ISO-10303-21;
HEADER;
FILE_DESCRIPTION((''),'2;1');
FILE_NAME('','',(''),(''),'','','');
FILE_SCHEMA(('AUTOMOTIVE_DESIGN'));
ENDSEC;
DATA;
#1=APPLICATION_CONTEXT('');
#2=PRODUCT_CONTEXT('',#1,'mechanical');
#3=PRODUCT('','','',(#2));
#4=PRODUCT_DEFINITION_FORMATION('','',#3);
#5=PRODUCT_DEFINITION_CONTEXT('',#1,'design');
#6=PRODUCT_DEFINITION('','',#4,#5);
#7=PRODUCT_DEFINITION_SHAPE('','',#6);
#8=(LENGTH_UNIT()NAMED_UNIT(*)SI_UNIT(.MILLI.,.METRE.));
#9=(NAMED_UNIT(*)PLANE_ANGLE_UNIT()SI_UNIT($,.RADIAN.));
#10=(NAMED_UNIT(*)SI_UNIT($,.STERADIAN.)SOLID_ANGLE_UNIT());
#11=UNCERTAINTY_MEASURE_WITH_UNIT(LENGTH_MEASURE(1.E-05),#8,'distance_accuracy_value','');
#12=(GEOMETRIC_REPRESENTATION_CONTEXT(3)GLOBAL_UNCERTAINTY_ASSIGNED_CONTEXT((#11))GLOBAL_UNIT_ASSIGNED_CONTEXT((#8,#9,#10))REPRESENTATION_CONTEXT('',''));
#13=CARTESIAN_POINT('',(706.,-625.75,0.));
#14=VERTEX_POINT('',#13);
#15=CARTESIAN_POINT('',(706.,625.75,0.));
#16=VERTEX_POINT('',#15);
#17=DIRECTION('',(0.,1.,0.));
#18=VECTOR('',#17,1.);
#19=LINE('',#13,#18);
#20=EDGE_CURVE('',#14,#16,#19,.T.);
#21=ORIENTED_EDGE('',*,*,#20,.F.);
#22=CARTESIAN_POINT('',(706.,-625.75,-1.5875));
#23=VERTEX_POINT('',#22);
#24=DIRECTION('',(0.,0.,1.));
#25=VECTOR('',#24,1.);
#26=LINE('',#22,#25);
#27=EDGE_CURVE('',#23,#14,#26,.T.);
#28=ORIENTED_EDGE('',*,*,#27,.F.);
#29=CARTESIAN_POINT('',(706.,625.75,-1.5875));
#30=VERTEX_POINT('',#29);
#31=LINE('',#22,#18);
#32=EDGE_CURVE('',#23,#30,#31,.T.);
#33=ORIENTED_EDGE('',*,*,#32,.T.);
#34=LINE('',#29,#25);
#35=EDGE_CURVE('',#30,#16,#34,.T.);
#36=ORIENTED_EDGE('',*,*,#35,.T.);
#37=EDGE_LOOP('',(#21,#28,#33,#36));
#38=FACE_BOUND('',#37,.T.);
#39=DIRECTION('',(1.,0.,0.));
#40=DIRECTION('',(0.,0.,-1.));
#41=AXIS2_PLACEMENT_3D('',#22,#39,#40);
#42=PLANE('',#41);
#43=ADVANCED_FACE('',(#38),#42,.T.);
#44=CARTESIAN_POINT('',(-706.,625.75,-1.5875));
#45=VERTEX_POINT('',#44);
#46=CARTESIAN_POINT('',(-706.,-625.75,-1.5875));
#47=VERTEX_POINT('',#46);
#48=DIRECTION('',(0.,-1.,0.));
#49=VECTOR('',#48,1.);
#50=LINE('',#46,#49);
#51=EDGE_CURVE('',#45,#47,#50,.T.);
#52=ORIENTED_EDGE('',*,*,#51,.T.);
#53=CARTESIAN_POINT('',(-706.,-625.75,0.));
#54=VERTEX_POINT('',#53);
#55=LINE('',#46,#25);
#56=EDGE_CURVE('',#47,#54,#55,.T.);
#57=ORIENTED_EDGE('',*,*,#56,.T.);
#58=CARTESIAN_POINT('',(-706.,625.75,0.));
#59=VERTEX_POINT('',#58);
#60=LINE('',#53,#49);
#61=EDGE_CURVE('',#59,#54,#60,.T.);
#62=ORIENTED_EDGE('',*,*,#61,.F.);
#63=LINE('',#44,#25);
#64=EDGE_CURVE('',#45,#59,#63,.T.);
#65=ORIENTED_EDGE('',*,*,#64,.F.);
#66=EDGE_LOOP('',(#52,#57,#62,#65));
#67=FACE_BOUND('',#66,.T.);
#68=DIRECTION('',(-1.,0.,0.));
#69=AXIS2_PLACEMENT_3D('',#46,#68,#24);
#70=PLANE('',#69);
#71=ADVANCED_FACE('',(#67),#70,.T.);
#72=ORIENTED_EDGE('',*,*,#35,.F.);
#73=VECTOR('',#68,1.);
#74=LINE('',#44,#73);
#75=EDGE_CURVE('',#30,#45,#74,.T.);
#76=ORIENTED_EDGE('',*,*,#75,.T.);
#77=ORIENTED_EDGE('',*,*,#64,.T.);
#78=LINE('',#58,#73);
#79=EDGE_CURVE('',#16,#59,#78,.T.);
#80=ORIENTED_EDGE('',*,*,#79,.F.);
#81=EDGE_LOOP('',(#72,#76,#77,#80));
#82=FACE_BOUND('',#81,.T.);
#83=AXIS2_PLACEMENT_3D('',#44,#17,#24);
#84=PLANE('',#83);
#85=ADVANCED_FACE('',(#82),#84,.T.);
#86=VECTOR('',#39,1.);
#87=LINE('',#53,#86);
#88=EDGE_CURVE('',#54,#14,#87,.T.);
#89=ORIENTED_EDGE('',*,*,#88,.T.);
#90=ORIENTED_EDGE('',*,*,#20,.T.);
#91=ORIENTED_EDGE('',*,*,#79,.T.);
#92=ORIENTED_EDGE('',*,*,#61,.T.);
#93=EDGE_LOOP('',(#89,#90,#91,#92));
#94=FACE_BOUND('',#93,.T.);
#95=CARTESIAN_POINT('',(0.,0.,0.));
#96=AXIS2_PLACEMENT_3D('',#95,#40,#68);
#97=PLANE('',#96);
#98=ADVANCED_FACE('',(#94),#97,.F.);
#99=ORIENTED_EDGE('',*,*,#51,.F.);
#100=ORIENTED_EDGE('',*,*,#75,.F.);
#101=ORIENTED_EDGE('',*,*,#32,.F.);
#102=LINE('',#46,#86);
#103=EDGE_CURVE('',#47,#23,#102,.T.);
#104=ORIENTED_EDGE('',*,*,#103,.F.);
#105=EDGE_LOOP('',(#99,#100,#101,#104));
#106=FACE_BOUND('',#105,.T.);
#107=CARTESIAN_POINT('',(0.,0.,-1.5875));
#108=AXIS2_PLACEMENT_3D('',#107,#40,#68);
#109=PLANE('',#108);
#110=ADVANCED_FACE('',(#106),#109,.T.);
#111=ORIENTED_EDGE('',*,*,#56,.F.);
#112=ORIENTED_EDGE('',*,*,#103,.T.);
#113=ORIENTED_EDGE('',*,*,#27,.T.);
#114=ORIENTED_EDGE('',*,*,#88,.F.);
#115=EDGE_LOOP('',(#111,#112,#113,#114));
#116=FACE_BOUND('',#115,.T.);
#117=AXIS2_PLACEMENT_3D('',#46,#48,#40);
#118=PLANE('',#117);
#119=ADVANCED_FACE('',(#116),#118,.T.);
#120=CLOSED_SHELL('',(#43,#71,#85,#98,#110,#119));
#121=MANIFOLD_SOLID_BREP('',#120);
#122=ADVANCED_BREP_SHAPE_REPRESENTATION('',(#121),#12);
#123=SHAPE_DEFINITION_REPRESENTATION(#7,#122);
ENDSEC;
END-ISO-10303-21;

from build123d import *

# Parameters (mm, degrees)
CROQUIS1_W        = 1412
CROQUIS1_H        = 1251.5
BRIDA_BASE1_DEPTH = 1.5875


# Sheet-metal steps are written as plain solids
with BuildPart() as part:
    # Croquis1 → Brida base1 (new body)
    with BuildSketch(Plane.XY):
        Rectangle(CROQUIS1_W, CROQUIS1_H)
    extrude(amount=-BRIDA_BASE1_DEPTH)


solid = part.part
